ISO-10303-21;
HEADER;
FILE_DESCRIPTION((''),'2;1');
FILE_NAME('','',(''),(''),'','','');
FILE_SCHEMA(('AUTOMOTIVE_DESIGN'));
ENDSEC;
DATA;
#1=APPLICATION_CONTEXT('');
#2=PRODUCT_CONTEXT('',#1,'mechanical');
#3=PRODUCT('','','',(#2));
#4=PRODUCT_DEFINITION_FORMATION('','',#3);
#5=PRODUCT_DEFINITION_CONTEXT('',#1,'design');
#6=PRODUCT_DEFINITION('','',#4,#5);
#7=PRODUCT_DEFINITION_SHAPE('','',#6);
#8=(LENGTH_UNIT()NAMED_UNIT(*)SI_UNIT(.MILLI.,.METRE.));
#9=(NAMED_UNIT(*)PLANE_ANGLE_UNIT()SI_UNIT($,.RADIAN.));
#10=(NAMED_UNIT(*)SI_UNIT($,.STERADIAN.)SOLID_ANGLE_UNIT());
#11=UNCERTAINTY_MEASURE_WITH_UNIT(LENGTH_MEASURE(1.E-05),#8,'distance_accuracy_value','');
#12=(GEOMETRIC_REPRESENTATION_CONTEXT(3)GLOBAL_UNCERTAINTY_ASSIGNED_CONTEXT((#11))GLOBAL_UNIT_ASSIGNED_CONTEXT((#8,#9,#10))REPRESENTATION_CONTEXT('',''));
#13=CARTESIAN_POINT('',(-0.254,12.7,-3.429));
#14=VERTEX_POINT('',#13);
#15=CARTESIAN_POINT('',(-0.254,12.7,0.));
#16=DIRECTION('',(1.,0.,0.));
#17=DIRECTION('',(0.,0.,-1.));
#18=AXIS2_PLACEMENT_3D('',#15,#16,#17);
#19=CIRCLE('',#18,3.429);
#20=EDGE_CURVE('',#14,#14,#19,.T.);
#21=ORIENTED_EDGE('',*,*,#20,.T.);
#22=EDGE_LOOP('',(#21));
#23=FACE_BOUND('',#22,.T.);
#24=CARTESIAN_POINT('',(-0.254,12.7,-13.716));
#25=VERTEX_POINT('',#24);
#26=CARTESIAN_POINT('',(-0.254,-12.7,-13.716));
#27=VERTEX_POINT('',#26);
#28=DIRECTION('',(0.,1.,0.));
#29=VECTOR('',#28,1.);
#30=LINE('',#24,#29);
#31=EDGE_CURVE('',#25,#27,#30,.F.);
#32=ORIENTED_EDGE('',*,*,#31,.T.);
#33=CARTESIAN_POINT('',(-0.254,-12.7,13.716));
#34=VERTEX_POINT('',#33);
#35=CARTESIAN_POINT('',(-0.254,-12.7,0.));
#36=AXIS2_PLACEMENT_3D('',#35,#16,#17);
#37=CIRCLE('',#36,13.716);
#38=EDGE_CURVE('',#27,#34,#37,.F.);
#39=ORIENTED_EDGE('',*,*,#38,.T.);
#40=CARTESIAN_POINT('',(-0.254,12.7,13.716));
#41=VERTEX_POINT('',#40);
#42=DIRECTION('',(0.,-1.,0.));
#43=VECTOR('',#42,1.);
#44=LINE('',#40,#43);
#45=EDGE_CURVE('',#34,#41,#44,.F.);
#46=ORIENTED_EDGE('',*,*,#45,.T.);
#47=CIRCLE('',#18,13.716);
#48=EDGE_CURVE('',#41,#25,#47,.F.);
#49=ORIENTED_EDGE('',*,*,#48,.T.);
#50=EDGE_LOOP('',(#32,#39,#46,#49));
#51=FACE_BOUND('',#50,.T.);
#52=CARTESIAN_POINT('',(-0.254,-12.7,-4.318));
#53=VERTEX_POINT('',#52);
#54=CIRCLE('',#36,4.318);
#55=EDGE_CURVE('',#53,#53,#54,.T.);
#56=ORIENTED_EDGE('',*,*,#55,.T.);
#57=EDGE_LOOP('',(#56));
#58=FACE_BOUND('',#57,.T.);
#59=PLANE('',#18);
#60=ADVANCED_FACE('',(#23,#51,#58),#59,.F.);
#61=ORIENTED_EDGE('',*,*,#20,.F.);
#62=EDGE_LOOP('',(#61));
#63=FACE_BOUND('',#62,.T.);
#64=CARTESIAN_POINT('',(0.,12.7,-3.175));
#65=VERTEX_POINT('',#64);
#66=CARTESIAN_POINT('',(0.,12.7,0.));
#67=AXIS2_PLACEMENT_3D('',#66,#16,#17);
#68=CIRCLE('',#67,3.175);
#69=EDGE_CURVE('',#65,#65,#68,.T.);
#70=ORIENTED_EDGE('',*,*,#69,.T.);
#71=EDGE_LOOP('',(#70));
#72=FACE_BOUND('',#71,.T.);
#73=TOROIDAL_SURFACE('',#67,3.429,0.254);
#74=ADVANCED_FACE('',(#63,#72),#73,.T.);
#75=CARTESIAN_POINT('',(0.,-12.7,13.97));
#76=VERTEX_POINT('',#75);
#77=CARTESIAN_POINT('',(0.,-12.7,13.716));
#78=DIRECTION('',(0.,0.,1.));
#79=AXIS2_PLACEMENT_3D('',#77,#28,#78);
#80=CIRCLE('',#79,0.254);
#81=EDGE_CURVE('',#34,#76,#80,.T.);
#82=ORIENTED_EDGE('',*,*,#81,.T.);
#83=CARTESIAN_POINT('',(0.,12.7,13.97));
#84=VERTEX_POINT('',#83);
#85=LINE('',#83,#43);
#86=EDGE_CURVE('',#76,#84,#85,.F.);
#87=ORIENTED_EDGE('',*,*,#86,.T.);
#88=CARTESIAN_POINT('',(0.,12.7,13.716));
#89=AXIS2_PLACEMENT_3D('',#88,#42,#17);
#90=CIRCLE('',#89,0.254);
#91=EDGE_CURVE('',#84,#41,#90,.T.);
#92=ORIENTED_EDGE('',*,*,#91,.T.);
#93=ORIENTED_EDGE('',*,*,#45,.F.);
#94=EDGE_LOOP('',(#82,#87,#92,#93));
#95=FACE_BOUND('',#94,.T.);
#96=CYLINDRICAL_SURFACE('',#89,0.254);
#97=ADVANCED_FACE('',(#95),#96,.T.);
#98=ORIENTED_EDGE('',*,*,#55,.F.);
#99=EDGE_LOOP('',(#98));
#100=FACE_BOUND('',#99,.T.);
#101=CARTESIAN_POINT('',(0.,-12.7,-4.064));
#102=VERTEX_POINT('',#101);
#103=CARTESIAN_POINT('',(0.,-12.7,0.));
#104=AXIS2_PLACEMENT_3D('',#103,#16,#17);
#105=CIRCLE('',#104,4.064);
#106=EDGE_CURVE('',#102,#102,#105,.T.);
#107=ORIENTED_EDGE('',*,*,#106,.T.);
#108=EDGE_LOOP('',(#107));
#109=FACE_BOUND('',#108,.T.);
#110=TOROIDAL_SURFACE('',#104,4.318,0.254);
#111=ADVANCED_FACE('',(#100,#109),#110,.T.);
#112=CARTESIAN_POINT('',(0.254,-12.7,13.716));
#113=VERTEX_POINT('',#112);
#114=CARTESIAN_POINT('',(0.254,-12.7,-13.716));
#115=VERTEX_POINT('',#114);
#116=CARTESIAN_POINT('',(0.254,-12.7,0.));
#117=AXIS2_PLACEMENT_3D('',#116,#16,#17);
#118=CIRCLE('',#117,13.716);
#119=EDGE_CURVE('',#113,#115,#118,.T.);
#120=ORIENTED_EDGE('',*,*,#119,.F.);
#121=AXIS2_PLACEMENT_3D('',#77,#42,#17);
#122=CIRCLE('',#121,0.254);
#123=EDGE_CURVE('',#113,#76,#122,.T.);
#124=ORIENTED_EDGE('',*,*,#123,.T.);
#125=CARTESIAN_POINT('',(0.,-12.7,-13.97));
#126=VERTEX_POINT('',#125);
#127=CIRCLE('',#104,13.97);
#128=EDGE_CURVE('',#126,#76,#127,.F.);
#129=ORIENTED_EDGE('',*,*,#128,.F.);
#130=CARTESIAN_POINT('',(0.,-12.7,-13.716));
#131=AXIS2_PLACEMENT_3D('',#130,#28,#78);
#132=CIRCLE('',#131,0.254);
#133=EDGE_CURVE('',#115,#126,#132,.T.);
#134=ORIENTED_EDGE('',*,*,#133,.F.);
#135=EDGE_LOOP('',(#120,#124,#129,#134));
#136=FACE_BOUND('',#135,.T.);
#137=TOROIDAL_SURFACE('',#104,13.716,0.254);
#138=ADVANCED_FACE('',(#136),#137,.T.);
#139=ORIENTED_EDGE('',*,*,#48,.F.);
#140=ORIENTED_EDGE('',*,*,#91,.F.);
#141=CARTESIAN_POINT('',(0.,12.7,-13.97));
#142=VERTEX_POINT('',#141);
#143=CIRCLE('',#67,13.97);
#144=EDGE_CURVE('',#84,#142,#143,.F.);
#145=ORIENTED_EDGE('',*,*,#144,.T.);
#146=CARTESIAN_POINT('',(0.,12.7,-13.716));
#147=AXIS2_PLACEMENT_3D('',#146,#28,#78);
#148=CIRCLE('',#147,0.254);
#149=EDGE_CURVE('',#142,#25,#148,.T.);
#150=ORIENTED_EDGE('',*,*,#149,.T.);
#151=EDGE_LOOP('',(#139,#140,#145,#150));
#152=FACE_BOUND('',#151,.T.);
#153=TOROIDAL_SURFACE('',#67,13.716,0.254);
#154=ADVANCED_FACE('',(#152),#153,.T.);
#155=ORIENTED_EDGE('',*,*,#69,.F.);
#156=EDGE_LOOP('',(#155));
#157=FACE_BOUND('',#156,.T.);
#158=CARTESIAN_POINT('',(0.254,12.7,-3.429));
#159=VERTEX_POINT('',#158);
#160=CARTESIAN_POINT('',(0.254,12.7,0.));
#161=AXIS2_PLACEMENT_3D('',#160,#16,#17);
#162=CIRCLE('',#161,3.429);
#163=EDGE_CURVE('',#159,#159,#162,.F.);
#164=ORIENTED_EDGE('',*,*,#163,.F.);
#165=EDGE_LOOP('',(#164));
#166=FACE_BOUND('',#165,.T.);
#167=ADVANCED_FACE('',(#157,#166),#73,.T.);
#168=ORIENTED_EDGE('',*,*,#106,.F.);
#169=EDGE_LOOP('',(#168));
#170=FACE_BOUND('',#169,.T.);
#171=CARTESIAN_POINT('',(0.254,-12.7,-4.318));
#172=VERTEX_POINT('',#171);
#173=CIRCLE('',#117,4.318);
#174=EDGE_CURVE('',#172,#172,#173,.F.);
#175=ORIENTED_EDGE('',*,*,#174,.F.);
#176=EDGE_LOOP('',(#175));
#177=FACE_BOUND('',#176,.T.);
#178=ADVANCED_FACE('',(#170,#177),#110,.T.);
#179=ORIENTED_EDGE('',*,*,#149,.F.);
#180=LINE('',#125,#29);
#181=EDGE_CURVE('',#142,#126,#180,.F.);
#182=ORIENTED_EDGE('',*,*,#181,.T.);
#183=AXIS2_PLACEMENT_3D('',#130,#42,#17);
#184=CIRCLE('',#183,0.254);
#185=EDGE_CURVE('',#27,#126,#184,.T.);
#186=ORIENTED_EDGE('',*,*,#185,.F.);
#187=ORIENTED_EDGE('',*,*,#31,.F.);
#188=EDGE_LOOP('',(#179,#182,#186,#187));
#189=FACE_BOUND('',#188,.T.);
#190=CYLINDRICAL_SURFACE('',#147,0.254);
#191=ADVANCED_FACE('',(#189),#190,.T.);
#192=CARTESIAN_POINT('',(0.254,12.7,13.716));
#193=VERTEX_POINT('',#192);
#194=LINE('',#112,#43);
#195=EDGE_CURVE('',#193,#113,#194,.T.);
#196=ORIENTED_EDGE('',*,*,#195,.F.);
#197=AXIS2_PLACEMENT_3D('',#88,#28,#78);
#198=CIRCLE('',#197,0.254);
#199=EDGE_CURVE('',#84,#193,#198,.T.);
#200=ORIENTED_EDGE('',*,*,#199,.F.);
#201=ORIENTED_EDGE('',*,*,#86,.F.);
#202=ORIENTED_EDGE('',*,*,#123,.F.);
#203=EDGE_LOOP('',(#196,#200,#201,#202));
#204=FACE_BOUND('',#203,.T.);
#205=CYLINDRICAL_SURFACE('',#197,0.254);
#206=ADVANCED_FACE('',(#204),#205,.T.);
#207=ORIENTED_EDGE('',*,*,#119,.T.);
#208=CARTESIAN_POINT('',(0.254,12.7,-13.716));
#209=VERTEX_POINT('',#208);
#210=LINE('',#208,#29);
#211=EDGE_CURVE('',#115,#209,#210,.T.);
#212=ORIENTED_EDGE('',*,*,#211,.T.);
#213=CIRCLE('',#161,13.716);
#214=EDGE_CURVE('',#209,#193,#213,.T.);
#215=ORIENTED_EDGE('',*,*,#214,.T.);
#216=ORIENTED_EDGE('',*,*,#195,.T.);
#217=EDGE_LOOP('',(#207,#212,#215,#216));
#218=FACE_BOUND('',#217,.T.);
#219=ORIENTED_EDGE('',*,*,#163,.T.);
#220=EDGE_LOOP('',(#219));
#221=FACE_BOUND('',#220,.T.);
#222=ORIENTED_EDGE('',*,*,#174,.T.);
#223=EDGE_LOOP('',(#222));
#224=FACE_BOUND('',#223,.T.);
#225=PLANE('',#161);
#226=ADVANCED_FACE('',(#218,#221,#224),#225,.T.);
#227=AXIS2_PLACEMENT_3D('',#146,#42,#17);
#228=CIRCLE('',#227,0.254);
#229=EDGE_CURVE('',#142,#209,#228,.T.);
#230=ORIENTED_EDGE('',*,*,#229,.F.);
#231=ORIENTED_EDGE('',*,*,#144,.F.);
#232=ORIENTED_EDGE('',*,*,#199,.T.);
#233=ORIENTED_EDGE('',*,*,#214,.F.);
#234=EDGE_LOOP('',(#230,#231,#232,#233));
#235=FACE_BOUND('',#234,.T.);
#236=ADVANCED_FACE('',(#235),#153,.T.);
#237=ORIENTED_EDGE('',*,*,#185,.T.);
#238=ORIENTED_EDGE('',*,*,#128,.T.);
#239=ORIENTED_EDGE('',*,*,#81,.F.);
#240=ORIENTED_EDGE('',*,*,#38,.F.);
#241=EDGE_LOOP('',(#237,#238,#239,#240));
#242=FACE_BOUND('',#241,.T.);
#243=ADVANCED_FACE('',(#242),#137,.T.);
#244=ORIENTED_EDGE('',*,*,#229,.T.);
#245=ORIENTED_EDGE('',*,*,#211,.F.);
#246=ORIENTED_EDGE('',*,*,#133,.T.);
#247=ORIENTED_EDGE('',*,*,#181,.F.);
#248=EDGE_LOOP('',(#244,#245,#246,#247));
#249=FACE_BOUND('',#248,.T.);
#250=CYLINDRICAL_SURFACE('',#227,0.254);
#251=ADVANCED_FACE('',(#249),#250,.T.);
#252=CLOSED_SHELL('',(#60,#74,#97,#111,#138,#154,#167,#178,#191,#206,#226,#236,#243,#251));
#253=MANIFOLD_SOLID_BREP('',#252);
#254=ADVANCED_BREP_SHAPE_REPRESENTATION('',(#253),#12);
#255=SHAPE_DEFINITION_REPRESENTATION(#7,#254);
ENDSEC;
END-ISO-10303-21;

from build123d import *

# Parameters (mm, degrees)
SKETCH2_R           = 3.175
SKETCH2_R_2         = 4.064
BOSS_EXTRUDE1_DEPTH = 0.254
FILLET1_R           = 0.254
FILLET2_R           = 0.254


with BuildPart() as part:
    # Sketch2 → Boss-Extrude1 (new, symmetric)
    with BuildSketch(Plane(origin=(0, 0, 0), x_dir=(0, 0, -1), z_dir=(1, 0, 0))):
        with BuildLine():
            Line((13.97, 12.7), (13.97, -12.7))
            ThreePointArc((13.97, -12.7), (0, -26.67), (-13.97, -12.7))
            Line((-13.97, -12.7), (-13.97, 12.7))
            ThreePointArc((-13.97, 12.7), (0, 26.67), (13.97, 12.7))
        make_face()
        with Locations((0, 12.7)):
            Circle(SKETCH2_R, mode=Mode.SUBTRACT)
        with Locations((0, -12.7)):
            Circle(SKETCH2_R_2, mode=Mode.SUBTRACT)
    extrude(amount=BOSS_EXTRUDE1_DEPTH, both=True)

    # Fillet1
    fillet1_edges = [part.edges().sort_by_distance(p)[0] for p in [
        (0.254, -26.67, 0),
        (0.254, 12.7, 3.175),
        (0.254, 0, -13.97),
        (0.254, -12.7, 4.064),
        (0.254, 26.67, 0),
        (0.254, 0, 13.97),
    ]]
    fillet(fillet1_edges, radius=FILLET1_R)

    # Fillet2
    fillet2_edges = [part.edges().sort_by_distance(p)[0] for p in [
        (-0.254, -12.7, 4.064),
        (-0.254, 12.7, 3.175),
        (-0.254, 0, 13.97),
        (-0.254, -26.67, 0),
        (-0.254, 0, -13.97),
        (-0.254, 26.67, 0),
    ]]
    fillet(fillet2_edges, radius=FILLET2_R - 0.0001)  # a hair under: the kernel refuses the full size


solid = part.part
